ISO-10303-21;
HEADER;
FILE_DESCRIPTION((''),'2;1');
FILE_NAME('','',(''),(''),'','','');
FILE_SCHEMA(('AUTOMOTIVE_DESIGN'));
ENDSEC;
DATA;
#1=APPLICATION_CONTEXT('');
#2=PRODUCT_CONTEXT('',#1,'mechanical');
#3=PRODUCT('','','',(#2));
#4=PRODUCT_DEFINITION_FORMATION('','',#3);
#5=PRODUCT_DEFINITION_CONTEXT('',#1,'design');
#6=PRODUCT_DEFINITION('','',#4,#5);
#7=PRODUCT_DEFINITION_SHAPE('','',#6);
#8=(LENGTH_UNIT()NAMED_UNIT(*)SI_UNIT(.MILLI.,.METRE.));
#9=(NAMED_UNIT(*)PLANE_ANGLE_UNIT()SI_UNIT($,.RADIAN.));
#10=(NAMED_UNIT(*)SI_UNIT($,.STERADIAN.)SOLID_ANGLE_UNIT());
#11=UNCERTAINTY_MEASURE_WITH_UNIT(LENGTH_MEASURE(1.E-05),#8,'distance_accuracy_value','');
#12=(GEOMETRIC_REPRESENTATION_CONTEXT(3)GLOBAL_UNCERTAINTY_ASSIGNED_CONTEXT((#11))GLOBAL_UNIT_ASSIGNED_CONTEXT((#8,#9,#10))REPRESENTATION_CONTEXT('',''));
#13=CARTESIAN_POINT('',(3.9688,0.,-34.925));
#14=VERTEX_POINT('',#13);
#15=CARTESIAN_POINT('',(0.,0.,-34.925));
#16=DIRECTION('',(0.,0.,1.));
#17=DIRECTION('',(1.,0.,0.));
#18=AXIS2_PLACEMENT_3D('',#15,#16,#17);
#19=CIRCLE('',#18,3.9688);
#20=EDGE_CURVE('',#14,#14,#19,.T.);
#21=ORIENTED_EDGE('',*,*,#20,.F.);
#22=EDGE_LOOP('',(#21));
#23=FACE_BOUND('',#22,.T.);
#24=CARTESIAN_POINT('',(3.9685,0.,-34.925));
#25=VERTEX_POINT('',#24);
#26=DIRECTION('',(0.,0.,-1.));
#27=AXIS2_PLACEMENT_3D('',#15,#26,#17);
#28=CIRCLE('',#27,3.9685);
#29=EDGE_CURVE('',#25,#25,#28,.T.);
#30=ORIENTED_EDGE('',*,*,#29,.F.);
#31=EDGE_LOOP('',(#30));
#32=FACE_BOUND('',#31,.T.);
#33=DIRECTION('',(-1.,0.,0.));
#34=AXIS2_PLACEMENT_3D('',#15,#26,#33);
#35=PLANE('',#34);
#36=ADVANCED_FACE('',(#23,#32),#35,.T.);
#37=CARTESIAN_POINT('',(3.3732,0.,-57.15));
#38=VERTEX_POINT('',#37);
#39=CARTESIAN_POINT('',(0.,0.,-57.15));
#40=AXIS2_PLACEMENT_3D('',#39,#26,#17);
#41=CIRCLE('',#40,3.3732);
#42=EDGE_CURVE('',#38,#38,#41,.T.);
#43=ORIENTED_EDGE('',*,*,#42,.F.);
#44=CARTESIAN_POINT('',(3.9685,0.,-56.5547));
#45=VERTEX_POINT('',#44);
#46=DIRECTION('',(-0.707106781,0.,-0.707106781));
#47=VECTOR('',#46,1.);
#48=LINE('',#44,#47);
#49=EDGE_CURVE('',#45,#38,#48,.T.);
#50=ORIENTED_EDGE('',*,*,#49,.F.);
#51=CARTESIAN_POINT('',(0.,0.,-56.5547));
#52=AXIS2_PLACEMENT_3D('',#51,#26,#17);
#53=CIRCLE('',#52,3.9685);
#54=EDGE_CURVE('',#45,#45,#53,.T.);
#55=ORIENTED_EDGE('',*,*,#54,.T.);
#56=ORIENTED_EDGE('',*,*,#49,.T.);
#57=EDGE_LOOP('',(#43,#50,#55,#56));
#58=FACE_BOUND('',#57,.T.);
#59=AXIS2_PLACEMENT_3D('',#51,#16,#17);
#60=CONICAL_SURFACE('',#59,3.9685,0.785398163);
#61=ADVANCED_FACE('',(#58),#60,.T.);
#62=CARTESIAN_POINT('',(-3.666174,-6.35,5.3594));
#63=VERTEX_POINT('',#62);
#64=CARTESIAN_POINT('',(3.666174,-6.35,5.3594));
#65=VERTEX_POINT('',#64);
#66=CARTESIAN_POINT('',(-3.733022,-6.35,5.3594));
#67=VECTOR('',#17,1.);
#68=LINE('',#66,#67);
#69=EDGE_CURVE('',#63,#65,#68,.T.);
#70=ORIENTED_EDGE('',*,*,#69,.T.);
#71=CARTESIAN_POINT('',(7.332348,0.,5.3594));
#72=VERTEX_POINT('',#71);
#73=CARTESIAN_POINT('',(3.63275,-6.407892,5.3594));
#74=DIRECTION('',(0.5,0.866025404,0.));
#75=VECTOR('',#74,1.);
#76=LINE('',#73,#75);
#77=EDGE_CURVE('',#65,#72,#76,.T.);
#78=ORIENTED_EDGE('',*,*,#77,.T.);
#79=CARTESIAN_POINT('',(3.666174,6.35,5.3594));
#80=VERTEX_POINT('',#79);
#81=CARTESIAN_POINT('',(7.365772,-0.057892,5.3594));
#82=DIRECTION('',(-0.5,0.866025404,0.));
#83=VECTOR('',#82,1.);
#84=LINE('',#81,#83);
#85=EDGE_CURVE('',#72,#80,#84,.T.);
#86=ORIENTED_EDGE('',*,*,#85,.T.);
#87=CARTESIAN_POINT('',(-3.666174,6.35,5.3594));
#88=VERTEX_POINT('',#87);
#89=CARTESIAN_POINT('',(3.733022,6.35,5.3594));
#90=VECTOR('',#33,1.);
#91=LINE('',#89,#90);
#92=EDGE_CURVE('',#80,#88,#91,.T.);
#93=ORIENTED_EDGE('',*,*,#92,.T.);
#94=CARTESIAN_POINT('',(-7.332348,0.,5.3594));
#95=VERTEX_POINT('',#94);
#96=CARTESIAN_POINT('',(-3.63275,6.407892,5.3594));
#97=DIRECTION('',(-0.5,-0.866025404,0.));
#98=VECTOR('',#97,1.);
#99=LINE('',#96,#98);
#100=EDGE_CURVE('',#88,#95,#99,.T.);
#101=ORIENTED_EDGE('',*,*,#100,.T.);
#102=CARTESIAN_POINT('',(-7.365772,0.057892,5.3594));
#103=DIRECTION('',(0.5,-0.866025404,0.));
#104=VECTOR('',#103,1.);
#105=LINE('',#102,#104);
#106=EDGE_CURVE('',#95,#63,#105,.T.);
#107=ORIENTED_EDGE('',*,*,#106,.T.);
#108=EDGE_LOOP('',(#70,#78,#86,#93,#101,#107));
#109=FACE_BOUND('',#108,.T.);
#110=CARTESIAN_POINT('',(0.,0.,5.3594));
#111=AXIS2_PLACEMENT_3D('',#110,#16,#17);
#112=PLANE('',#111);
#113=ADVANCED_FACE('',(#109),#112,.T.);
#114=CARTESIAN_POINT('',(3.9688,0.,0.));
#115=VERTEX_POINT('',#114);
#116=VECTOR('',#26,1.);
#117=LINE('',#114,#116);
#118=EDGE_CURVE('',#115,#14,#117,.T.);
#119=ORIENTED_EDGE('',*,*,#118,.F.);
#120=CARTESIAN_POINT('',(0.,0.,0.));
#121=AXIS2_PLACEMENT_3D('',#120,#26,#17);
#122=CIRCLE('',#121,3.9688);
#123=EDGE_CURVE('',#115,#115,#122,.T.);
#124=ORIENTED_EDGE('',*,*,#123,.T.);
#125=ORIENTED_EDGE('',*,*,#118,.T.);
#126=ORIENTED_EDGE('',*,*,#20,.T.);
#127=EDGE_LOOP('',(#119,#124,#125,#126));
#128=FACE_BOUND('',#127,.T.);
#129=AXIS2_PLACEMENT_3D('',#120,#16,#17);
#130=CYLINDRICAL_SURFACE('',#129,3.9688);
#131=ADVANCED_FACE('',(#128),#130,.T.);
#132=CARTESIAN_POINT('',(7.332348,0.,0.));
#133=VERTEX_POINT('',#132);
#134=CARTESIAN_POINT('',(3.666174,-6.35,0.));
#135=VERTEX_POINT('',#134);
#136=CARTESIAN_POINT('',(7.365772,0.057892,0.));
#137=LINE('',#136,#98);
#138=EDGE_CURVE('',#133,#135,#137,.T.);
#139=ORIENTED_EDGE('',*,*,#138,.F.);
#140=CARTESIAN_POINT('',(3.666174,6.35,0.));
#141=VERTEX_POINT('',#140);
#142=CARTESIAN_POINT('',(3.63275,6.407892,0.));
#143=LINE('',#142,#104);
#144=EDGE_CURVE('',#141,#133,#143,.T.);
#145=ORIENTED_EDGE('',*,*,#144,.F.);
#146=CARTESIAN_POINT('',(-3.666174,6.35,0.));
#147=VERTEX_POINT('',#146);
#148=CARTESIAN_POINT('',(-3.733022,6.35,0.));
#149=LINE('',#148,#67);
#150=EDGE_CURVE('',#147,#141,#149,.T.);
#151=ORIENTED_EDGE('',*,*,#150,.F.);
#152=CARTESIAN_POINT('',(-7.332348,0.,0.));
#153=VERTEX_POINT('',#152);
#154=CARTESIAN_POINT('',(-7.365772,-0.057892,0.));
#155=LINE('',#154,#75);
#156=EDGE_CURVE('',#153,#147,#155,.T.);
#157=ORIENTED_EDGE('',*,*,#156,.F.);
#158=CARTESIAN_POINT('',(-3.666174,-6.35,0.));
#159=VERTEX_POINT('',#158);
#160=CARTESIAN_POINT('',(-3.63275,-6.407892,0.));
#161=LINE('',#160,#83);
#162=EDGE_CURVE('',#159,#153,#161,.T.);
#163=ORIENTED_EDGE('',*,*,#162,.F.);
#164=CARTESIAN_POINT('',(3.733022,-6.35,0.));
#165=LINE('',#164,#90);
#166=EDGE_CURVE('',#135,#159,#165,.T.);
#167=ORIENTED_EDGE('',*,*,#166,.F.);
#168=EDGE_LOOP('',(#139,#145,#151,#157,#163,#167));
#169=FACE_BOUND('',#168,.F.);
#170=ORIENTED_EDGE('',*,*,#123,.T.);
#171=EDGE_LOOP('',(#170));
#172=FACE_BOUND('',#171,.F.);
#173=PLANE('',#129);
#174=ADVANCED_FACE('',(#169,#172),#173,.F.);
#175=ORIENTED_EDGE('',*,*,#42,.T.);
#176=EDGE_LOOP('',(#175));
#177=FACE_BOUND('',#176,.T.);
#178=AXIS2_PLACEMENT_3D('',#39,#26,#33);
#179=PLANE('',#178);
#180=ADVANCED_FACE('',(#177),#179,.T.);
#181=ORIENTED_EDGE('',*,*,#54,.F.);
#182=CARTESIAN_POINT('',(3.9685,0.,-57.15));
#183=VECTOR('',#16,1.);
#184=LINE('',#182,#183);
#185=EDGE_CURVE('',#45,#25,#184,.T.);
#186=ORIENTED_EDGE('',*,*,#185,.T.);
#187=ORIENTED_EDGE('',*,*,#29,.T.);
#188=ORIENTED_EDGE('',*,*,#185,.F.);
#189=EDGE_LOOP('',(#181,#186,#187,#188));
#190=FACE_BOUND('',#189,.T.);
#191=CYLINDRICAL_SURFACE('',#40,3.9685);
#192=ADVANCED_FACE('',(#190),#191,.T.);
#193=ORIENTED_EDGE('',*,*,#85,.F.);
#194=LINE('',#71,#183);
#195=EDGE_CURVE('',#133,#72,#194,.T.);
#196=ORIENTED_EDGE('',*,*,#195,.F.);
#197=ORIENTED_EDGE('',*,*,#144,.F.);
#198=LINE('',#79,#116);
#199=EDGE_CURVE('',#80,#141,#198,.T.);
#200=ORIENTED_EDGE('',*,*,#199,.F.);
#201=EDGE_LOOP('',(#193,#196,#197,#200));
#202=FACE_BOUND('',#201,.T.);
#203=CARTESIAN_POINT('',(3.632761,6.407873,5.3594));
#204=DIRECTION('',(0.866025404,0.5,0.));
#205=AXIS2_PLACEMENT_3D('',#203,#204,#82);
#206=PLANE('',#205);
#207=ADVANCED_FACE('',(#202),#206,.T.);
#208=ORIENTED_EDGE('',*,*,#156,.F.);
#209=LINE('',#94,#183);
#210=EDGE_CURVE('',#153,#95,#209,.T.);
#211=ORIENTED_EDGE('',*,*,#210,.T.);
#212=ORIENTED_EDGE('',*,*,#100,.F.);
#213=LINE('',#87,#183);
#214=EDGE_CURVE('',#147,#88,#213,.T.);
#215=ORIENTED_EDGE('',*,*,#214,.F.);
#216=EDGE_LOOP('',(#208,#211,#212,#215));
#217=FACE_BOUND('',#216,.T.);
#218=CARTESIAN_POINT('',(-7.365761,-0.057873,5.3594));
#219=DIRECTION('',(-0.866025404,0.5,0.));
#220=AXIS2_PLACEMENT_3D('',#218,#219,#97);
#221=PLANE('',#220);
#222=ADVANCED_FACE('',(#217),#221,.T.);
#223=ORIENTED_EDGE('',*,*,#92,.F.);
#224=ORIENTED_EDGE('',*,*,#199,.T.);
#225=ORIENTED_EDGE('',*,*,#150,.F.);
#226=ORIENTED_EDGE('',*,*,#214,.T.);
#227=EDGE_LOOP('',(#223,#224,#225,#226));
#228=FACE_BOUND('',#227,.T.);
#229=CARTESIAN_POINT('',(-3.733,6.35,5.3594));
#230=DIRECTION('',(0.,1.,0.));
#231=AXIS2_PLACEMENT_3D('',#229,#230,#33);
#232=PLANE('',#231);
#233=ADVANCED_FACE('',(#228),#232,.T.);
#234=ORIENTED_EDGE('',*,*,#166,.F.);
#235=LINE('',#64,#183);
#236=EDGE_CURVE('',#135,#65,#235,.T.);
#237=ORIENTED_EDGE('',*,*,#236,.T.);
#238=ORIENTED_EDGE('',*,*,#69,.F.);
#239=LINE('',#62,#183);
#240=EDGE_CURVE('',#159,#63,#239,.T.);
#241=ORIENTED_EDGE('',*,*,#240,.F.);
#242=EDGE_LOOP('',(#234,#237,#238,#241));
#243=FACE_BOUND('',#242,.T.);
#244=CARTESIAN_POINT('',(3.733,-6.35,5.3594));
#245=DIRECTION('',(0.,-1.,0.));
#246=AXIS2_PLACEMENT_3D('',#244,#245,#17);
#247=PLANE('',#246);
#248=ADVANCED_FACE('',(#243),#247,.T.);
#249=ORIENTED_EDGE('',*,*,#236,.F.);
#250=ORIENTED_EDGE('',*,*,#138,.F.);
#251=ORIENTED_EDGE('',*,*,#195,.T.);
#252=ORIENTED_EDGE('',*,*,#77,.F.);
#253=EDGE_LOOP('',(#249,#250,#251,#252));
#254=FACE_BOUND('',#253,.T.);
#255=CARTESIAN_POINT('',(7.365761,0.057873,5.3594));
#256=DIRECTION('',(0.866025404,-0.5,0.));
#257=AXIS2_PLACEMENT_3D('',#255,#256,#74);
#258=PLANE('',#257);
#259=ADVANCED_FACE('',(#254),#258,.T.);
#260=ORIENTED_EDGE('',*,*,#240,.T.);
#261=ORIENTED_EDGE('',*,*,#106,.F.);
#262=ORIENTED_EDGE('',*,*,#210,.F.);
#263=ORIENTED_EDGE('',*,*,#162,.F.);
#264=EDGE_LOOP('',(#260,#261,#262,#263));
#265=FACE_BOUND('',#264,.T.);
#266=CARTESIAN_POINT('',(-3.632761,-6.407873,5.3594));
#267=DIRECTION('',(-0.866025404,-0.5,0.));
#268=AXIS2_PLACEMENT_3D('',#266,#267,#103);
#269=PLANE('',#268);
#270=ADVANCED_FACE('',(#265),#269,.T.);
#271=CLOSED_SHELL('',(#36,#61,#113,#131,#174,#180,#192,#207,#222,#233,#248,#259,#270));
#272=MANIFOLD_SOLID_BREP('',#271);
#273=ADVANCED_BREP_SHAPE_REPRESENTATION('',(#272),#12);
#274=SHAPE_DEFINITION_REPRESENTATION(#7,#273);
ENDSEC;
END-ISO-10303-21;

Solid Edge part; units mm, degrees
sketch "Sketch1" plane through (0, 0, 0) normal (0, 0, 1) x (1, 0, 0)
  circle A0 centre (0, 0) radius 7.366
  dimension "D1" = 14.732
extrude "Protrusion1" add sketch "Sketch1" along normal blind 5.3594
sketch "Sketch2" plane through (0, 0, 0) normal (0, 0, -1) x (1, 0, 0)
  circle A0 centre (0, 0) radius 3.9688
extrude "Protrusion2" add sketch "Sketch2" along normal blind 57.15
sketch "Sketch3" plane through (0, 0, -57.15) normal (0, 0, -1) x (1, 0, 0)
  circle A0 centre (0, 0) radius 3.9685
extrude "Cutout1" cut sketch "Sketch3" against normal blind 22.225 flip side to cut
chamfer "Chamfer_1" distance 0.5953 angle 45 1 edges at (-3.9685, 0, -57.15)
sketch "Sketch4" plane through (0, 0, 5.3594) normal (0, 0, 1) x (1, 0, 0)
  line L0 (-3.733, 6.35) -> (3.733, 6.35)
  dimension "D1" = 12.7
extrude "Cutout2" cut sketch "Sketch4" against normal up to next material side at (0, 6.4, 5.3594)
pattern_circular "Pattern1" count 6 over 360 about axis through (0, 0, 5.3594) along (0, 0, 1) of "Cutout2"
properties part number "161169"
